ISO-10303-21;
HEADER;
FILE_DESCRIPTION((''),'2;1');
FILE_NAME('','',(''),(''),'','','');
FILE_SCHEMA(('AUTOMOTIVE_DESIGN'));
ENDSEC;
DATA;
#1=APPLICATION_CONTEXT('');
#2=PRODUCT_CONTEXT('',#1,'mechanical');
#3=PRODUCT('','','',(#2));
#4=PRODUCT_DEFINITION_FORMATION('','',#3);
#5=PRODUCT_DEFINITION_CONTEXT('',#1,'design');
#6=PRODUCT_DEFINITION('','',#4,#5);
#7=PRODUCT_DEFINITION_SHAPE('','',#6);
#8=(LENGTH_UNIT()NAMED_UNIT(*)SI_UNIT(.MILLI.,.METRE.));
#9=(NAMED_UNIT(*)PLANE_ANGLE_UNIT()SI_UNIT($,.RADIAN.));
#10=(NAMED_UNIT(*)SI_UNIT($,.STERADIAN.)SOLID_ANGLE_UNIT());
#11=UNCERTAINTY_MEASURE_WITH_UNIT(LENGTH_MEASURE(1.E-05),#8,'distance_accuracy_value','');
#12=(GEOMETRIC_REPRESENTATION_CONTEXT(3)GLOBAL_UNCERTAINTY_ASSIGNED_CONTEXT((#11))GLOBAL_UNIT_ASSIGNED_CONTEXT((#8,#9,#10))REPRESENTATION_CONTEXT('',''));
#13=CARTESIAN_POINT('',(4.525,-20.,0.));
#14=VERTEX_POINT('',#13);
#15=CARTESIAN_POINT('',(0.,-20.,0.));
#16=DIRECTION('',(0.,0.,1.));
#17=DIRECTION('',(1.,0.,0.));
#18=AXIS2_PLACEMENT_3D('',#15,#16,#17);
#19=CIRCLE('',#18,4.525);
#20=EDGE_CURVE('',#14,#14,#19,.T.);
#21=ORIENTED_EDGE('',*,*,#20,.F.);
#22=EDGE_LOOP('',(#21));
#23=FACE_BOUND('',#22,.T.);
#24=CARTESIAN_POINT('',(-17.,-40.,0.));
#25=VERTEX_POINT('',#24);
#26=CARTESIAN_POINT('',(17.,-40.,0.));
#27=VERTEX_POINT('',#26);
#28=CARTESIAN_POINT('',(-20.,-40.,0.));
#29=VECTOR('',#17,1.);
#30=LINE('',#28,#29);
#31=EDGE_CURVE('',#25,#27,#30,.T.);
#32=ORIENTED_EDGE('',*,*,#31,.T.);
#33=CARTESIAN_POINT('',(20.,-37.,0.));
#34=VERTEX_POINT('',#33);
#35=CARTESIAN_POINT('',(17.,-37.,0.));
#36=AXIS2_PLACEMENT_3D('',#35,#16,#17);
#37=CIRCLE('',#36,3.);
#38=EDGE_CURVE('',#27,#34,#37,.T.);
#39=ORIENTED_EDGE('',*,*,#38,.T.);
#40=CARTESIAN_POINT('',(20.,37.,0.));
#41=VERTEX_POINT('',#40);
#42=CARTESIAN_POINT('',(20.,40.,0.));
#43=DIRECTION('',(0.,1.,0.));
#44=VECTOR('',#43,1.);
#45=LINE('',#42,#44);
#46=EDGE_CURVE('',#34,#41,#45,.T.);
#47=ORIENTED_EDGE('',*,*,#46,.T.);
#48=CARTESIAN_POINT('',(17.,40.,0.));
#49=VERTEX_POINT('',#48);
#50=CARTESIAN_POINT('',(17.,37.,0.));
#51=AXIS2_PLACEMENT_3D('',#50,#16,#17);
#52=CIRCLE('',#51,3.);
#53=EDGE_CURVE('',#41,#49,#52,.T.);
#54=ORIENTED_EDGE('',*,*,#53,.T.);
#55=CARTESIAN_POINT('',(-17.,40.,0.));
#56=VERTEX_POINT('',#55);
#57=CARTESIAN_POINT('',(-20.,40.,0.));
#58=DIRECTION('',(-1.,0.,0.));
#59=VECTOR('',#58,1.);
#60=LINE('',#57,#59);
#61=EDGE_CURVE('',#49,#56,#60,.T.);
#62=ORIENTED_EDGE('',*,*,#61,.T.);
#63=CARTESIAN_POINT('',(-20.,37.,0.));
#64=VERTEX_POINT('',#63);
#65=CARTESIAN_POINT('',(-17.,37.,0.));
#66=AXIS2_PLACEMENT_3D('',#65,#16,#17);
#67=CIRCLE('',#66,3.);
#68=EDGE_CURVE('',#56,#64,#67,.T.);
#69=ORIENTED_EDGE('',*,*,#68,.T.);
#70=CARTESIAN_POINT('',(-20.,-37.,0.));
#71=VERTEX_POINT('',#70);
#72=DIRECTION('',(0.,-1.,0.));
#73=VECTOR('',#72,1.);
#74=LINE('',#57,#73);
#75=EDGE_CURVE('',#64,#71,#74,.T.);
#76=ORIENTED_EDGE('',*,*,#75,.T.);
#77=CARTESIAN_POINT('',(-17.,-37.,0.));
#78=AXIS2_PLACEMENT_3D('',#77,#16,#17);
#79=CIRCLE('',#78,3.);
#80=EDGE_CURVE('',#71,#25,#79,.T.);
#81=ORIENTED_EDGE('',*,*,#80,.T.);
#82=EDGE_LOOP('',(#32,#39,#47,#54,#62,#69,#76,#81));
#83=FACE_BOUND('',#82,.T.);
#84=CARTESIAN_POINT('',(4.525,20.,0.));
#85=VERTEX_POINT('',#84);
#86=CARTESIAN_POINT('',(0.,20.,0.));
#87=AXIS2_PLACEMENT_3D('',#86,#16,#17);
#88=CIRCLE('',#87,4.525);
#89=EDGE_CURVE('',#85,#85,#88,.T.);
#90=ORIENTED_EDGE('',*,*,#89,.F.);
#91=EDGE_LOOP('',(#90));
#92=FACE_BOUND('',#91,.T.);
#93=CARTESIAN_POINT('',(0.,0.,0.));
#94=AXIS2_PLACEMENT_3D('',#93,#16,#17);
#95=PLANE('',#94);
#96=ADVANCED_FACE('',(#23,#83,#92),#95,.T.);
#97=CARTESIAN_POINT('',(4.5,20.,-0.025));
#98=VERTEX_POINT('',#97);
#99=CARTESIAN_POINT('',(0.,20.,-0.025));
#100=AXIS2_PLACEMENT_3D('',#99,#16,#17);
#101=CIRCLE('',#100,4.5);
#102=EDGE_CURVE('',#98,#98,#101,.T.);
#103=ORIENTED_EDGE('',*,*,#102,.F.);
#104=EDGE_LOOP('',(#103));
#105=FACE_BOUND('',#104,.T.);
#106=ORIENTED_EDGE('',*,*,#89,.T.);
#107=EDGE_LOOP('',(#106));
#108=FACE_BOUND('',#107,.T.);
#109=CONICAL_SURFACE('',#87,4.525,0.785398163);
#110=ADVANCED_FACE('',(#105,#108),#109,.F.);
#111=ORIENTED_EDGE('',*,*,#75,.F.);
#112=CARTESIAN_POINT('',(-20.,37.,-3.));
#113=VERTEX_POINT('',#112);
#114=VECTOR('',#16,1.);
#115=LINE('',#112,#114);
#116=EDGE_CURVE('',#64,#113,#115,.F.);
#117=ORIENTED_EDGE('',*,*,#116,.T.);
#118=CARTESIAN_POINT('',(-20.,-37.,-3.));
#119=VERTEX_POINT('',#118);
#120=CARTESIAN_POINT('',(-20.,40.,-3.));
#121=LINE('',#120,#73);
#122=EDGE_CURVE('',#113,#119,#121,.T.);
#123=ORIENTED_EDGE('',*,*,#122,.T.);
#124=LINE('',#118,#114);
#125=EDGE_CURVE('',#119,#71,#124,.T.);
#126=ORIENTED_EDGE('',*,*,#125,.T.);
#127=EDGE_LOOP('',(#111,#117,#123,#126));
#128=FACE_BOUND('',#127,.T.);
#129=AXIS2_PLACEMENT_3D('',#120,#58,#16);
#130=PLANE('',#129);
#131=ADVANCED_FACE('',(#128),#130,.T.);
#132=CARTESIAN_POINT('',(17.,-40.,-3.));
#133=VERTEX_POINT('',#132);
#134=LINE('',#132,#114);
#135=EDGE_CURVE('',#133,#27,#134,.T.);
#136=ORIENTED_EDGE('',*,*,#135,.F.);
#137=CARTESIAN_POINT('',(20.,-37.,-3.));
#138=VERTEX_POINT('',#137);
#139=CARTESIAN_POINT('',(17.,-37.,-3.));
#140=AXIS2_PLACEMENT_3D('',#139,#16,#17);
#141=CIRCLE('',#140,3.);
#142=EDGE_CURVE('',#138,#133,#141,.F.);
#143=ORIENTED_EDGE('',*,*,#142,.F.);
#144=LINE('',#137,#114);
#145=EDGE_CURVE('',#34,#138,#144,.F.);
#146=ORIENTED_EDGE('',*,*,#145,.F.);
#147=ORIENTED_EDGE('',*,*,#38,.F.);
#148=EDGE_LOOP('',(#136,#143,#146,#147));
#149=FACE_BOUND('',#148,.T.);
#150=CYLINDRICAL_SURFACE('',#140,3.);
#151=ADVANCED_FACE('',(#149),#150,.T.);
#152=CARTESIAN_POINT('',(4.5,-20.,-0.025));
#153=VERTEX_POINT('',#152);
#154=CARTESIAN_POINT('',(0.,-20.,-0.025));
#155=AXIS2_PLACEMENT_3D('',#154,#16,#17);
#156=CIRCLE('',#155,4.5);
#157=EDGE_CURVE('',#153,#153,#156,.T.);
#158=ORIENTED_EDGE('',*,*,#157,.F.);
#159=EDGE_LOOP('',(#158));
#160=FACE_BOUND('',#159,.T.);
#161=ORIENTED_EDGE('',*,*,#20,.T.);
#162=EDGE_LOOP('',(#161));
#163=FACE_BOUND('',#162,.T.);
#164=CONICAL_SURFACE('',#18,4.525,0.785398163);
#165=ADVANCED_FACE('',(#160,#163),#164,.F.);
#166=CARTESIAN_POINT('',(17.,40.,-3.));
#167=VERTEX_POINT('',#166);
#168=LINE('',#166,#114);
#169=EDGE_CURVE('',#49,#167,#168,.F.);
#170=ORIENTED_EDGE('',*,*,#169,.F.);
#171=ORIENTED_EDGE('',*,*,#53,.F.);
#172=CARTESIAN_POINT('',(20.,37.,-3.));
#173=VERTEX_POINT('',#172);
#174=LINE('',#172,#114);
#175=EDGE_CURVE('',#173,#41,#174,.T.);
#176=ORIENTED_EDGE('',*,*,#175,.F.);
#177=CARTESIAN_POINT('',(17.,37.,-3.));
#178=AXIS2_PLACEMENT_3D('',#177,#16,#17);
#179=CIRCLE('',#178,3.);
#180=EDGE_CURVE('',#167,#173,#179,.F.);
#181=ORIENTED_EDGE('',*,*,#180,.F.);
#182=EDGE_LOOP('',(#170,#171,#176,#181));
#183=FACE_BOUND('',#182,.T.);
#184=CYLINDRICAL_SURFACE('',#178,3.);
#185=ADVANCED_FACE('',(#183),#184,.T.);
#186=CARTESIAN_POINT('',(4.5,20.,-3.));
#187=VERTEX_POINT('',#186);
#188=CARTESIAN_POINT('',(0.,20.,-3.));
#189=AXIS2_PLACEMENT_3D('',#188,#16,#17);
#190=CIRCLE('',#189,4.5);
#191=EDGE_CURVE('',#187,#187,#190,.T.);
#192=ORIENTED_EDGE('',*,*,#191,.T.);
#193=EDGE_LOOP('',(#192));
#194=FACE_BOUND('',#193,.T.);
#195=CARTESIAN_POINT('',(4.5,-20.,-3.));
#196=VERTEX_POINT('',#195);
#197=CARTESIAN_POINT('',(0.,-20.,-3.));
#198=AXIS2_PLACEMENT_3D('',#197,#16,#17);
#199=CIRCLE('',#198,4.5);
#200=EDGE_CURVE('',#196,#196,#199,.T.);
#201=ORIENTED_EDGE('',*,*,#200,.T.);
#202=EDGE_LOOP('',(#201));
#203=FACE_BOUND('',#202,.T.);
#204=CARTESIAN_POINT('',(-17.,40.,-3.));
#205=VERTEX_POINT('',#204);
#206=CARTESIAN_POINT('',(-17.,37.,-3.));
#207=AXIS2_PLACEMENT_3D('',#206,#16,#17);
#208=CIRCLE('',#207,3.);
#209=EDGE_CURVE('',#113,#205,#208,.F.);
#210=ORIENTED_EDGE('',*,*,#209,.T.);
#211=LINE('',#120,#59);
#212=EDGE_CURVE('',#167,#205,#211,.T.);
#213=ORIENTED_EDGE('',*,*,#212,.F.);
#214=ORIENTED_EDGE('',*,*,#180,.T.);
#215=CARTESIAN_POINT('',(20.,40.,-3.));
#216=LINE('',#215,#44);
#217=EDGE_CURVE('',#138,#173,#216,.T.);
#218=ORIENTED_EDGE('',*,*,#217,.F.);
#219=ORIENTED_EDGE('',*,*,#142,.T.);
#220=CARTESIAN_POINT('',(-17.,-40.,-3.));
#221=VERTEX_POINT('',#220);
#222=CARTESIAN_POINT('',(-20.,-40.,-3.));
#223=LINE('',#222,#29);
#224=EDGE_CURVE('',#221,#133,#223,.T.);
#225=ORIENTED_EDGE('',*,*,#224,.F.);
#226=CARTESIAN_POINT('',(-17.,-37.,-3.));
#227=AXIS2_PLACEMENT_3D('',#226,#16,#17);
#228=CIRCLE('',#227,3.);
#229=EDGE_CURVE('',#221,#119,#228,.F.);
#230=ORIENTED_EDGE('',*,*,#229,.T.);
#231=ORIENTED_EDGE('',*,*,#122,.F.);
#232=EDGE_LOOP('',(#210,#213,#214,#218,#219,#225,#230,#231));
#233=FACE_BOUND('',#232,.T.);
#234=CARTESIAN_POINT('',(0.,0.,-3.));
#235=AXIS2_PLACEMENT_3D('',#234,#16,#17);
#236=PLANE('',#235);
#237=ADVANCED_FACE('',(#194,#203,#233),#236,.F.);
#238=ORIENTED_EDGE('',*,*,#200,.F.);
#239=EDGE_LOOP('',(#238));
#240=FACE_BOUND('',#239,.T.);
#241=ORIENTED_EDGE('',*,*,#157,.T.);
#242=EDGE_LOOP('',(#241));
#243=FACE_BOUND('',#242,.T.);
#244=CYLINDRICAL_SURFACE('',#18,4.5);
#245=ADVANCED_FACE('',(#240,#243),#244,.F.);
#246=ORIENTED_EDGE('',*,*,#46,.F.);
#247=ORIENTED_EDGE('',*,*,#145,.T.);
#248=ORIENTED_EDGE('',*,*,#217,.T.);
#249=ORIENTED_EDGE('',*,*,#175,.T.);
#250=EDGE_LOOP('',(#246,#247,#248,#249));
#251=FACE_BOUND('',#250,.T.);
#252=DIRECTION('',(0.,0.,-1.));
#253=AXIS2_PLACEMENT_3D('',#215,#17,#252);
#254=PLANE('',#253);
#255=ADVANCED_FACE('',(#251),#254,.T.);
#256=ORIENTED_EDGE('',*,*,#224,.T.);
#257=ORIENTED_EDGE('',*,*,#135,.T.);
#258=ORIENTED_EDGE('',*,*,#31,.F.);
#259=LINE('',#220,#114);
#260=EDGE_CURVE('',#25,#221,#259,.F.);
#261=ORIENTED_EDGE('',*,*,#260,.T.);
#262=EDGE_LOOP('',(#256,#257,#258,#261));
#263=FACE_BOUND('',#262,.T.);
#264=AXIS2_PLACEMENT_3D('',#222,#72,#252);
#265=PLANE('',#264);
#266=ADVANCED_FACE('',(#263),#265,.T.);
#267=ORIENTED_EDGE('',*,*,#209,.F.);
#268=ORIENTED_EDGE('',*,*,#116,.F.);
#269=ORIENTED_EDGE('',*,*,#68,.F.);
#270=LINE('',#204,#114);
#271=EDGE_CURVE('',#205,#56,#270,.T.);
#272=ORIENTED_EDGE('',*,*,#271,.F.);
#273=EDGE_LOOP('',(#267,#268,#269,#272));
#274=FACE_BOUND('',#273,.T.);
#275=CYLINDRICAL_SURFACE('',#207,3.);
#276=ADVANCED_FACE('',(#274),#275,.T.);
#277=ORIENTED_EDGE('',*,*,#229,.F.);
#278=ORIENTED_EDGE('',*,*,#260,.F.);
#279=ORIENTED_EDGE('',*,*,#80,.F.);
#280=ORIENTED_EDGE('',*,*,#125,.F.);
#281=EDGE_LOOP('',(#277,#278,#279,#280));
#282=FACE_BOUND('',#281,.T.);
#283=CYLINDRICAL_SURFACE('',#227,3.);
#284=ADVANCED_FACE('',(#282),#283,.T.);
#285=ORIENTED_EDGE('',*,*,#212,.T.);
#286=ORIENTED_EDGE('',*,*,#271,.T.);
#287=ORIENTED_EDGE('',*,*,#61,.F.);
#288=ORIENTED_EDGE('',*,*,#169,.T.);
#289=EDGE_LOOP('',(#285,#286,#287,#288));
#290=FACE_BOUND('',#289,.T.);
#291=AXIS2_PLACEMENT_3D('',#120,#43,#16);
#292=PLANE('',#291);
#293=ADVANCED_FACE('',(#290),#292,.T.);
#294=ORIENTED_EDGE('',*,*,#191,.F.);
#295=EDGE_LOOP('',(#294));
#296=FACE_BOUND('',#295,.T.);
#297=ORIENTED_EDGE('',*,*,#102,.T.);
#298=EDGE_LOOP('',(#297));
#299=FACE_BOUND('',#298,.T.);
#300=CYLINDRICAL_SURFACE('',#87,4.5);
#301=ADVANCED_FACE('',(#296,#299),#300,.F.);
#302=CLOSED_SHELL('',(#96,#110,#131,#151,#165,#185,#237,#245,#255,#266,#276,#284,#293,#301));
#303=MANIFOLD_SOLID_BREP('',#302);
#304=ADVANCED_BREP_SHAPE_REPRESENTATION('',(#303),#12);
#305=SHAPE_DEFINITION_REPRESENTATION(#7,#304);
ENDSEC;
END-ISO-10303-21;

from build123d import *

# Parameters (mm, degrees)
SKETCH_1_W                   = 40
SKETCH_1_H                   = 80
SM_BASE_FLANGE_1_DEPTH       = 3
OTHER_START                  = -3
OTHER_1_DEPTH                = 3
HOLE_WIZARD_M8_1_D           = 9
HOLE_WIZARD_M8_1_DEPTH       = 12.4
HOLE_WIZARD_M8_1_CSINK_D     = 9.05
HOLE_WIZARD_M8_1_CSINK_ANGLE = 90
HOLE_WIZARD_M8_1_TIP         = 2.703872786


# Read off the part's stored shape, not the designer's step: 断开-边角1
# Sheet-metal steps are written as plain solids
with BuildPart() as part:
    # Sketch 1 → 基体-法兰1 (new body)
    with BuildSketch(Plane.XY):
        Rectangle(SKETCH_1_W, SKETCH_1_H)
    extrude(amount=-SM_BASE_FLANGE_1_DEPTH)

    # Other 1 outline → Other 1 (cut)
    with BuildSketch(Plane.XY.offset(OTHER_START)):
        with BuildLine():
            ThreePointArc((20, -37), (19.121320344, -39.121320344), (17, -40))
            Line((17, -40), (20, -40))
            Line((20, -40), (20, -37))
        make_face()
        with BuildLine():
            Line((-20, -40), (-17, -40))
            ThreePointArc((-17, -40), (-19.121320344, -39.121320344), (-20, -37))
            Line((-20, -37), (-20, -40))
        make_face()
        with BuildLine():
            ThreePointArc((17, 40), (19.121320344, 39.121320344), (20, 37))
            Line((20, 37), (20, 40))
            Line((20, 40), (17, 40))
        make_face()
        with BuildLine():
            Line((-20, 40), (-20, 37))
            ThreePointArc((-20, 37), (-19.121320344, 39.121320344), (-17, 40))
            Line((-17, 40), (-20, 40))
        make_face()
    extrude(amount=OTHER_1_DEPTH, mode=Mode.SUBTRACT)

    # M8 间隙孔1
    with Locations(Plane.XY):
        with Locations((0, 20), (0, -20)):
            CounterSinkHole(HOLE_WIZARD_M8_1_D / 2, HOLE_WIZARD_M8_1_CSINK_D / 2, depth=HOLE_WIZARD_M8_1_DEPTH, counter_sink_angle=HOLE_WIZARD_M8_1_CSINK_ANGLE)
            with Locations((0, 0, -(HOLE_WIZARD_M8_1_DEPTH + HOLE_WIZARD_M8_1_TIP / 2))):  # 118° drill point
                Cone(0, HOLE_WIZARD_M8_1_D / 2, HOLE_WIZARD_M8_1_TIP, mode=Mode.SUBTRACT)


solid = part.part
